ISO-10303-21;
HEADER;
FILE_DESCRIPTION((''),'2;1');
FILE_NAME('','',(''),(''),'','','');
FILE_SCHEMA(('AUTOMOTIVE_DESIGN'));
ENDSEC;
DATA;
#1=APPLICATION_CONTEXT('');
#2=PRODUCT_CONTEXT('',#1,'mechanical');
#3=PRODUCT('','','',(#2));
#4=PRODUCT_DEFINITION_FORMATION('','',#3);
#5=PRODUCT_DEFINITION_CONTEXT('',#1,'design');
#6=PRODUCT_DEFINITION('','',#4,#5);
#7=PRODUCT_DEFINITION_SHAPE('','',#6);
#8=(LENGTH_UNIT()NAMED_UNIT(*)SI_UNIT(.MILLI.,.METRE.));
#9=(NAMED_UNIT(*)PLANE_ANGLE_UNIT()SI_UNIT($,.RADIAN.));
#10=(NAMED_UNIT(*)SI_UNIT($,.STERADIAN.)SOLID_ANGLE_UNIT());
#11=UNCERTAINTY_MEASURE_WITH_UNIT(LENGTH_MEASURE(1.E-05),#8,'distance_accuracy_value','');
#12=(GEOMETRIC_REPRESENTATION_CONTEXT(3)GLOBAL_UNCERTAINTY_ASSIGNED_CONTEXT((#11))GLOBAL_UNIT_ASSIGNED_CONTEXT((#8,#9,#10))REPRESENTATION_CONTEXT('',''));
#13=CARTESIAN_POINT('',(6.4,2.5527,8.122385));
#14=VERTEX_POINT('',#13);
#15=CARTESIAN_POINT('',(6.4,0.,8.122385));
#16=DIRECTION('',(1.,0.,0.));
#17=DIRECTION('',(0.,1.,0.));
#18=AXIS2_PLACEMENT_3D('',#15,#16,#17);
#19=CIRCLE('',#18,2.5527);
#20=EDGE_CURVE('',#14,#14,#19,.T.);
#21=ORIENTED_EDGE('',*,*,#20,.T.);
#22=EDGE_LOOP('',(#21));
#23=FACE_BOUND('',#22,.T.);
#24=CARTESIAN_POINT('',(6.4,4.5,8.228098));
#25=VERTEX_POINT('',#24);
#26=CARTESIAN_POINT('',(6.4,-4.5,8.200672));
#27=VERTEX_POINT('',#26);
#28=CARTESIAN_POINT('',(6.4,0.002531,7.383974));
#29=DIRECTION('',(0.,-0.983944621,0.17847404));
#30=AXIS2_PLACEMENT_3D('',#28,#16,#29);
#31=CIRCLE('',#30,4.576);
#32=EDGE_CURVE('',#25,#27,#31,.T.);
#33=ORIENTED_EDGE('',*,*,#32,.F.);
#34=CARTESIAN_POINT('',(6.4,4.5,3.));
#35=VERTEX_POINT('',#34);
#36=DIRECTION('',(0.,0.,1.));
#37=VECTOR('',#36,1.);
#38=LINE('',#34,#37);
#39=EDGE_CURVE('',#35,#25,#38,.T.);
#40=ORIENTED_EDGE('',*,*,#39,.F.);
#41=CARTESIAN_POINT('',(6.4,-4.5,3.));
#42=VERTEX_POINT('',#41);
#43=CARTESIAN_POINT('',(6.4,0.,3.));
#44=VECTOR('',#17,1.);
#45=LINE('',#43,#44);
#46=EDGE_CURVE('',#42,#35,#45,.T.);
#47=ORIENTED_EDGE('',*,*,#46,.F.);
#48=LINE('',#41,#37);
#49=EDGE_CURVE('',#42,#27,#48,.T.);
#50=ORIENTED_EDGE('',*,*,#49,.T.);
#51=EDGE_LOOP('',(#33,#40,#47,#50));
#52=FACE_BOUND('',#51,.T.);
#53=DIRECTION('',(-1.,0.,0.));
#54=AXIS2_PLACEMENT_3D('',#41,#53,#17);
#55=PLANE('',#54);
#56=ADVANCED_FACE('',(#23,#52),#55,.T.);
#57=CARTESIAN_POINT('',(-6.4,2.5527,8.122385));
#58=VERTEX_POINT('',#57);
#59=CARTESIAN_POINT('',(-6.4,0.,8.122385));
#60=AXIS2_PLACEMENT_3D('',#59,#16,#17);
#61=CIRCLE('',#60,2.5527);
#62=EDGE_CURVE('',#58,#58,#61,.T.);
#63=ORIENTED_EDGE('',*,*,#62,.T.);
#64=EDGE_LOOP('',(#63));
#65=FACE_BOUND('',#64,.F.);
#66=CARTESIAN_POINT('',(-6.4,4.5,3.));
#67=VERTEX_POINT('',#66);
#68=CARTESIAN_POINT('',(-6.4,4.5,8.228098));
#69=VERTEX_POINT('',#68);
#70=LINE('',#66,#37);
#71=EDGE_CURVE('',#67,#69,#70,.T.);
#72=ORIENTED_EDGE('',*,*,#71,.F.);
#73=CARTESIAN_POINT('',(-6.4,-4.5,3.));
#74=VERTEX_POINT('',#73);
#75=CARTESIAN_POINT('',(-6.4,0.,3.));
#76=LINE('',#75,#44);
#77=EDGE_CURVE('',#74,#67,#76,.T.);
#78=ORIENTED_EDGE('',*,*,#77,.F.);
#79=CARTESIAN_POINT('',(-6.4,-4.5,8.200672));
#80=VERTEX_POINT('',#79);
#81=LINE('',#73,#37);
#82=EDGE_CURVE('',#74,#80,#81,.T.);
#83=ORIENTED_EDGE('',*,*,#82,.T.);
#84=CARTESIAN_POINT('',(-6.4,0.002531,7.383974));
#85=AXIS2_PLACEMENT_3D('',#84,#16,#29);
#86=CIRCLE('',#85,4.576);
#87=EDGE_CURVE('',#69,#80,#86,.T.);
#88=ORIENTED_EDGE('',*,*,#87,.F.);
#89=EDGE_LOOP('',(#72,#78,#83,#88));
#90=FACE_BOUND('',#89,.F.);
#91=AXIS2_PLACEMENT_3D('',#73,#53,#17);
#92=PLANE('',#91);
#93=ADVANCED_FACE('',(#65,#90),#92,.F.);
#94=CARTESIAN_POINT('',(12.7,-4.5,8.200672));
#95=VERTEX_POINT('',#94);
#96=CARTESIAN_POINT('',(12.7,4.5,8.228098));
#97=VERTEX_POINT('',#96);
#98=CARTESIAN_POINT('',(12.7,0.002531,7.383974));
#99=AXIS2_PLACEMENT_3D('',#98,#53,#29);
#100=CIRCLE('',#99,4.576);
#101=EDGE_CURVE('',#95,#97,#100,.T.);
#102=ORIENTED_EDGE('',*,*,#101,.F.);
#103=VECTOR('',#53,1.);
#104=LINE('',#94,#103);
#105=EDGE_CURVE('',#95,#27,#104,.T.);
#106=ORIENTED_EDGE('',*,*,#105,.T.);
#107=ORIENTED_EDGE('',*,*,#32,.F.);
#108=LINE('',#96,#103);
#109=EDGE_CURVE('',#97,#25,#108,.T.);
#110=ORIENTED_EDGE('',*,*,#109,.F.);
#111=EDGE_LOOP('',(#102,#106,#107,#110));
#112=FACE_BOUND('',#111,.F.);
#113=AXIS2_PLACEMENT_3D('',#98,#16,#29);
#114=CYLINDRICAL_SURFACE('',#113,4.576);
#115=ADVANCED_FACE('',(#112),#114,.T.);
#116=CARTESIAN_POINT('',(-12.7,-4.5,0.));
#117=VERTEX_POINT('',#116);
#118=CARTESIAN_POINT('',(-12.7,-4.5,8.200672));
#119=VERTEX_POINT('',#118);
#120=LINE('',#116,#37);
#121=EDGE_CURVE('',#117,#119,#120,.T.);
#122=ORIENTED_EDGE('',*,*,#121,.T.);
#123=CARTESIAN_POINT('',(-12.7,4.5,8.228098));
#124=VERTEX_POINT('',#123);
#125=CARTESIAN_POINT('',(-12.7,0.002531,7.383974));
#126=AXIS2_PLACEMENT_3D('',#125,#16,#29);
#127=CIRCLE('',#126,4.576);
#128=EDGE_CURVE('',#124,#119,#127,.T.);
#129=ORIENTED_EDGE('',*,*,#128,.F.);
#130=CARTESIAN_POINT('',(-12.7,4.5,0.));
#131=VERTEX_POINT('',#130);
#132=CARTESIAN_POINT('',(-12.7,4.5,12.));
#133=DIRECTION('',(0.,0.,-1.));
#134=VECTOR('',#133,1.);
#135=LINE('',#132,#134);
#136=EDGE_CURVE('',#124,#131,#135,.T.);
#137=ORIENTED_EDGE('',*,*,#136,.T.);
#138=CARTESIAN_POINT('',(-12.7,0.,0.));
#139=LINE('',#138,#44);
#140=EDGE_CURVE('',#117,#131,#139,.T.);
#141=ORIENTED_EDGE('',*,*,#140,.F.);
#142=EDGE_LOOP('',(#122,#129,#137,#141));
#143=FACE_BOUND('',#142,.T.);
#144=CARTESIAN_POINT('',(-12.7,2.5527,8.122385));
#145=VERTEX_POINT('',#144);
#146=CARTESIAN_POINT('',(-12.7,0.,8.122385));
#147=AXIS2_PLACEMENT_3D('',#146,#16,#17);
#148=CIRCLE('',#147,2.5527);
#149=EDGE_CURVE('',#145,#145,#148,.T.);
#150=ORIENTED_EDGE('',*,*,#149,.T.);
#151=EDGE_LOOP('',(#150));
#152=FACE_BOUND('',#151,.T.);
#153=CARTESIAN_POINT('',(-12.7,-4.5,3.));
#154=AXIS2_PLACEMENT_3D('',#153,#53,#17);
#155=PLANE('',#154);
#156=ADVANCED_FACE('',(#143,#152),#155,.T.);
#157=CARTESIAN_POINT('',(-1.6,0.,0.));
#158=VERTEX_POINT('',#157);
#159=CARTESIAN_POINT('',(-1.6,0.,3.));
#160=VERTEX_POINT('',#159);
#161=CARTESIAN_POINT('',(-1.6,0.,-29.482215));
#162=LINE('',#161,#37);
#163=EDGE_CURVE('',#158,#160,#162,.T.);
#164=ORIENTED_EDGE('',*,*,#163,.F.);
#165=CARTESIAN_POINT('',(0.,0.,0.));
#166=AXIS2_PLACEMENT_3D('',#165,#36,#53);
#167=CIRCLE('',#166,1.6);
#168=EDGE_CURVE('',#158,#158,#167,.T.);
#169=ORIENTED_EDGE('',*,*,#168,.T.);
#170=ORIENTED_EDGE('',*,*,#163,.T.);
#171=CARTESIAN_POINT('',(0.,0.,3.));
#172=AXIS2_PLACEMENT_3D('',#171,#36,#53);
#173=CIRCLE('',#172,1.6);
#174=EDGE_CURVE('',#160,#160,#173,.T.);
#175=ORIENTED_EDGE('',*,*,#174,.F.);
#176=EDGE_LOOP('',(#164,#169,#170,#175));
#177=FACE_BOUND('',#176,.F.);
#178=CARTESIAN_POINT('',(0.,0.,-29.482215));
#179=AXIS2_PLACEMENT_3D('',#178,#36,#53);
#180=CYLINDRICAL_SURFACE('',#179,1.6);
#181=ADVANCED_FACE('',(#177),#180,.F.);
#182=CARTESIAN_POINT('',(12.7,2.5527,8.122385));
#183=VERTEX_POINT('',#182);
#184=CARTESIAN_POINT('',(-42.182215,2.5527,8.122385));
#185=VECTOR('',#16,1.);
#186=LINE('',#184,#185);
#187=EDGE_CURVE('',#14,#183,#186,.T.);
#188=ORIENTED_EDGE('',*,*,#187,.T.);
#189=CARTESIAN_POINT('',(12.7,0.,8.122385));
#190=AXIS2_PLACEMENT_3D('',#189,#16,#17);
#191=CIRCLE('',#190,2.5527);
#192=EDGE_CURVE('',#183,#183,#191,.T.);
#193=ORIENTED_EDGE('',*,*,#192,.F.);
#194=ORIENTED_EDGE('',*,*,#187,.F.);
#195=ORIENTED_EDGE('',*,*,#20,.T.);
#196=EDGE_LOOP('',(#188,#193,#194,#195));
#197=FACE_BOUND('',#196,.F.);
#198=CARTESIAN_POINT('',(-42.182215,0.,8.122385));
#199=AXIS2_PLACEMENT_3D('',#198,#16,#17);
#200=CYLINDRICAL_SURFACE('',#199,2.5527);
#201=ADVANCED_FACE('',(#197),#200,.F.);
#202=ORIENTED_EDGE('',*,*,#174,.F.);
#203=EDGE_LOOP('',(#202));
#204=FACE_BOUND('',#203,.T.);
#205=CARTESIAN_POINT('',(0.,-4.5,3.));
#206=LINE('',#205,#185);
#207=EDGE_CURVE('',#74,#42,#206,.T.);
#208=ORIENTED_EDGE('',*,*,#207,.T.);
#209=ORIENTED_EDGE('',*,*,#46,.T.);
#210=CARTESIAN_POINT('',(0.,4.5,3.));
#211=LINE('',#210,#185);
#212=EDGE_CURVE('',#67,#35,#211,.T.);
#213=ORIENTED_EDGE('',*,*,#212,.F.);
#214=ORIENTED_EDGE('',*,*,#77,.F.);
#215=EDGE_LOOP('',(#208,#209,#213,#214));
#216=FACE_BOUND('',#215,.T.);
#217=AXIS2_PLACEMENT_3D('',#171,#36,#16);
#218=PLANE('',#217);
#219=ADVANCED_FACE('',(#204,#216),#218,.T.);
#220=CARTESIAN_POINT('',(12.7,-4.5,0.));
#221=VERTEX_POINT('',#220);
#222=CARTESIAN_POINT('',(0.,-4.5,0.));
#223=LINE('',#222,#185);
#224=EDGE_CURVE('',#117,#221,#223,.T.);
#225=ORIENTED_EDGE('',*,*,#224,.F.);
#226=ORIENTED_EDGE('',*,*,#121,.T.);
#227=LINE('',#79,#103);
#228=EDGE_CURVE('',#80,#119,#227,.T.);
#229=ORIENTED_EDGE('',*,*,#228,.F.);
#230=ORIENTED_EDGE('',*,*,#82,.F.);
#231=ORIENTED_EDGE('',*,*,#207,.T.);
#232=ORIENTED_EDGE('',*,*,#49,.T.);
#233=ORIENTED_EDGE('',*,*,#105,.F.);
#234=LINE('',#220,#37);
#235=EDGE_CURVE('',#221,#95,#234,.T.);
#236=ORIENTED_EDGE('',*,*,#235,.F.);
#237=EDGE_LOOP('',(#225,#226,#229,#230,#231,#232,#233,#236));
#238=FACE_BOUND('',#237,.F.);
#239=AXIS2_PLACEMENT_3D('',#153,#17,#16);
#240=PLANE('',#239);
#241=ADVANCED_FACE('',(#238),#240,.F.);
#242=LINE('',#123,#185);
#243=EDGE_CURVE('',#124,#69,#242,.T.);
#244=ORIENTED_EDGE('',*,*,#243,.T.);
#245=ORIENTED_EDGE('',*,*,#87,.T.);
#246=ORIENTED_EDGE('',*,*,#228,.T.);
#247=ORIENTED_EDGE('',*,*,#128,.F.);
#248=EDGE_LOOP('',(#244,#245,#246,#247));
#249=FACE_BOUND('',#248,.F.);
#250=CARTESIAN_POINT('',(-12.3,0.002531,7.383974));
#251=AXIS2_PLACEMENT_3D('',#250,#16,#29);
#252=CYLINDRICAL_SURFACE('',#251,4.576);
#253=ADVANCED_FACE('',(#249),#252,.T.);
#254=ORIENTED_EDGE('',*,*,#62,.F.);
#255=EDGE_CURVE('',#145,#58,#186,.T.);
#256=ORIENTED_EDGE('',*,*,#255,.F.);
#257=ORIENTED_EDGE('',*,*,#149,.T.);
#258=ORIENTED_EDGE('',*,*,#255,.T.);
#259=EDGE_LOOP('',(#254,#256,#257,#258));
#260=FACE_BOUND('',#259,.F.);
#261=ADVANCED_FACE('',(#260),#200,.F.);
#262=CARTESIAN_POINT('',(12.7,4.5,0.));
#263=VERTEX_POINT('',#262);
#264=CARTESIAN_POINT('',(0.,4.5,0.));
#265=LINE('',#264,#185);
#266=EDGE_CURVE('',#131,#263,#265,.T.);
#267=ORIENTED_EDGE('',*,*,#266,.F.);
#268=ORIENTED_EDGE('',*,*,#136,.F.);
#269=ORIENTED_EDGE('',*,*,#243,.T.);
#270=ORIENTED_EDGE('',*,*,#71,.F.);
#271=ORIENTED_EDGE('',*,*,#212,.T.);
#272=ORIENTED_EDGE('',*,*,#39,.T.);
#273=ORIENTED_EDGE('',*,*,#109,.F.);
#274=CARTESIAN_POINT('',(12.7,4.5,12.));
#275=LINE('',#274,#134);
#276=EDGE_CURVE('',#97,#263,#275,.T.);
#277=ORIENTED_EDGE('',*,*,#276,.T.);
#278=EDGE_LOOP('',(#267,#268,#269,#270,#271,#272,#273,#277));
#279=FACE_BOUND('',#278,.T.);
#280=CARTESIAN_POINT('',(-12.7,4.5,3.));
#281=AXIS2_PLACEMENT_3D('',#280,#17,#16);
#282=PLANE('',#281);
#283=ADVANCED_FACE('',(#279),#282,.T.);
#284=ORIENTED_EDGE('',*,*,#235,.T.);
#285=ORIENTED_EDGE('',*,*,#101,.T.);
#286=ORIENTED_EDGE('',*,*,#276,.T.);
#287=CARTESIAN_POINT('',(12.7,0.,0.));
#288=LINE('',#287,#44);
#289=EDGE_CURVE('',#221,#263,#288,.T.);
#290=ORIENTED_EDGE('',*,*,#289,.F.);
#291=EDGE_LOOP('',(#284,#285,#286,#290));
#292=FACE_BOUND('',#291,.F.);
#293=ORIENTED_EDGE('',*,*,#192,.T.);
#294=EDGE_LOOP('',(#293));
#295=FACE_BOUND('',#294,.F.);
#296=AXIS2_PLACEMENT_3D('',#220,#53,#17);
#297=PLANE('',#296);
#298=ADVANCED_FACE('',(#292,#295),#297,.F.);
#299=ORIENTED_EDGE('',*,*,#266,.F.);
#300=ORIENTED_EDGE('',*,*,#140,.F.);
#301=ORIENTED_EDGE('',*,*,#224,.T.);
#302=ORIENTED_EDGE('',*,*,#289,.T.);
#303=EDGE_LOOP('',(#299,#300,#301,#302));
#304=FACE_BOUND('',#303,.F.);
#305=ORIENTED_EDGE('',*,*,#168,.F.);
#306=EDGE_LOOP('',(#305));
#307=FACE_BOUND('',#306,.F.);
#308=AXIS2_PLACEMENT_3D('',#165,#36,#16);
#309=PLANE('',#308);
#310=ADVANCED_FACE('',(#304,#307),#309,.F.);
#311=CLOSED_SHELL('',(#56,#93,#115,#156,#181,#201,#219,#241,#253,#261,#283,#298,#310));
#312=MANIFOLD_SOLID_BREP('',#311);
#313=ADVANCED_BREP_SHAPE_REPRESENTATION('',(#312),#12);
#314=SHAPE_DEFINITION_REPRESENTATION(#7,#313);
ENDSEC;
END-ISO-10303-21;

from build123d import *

# Parameters (mm, degrees)
F0_W     = 25.4
F0_H     = 9
F1_DEPTH = 3
F2_W     = 6.3
F2_H     = 9
F3_DEPTH = 9
F5_DEPTH = 25
F6_DEPTH = 25
F8_D     = 5.1054
F9_D     = 3.2


with BuildPart() as f1:
    # F0 (on Top) → F1 (new body)
    with BuildSketch(Plane.XY):
        Rectangle(F0_W, F0_H)
    extrude(amount=F1_DEPTH)

    # F2 (on face) → F3 (join)
    with BuildSketch(Plane.XY.offset(3)):
        with Locations((-9.55, 0)):
            Rectangle(F2_W, F2_H)
        with Locations((9.55, 0)):
            Rectangle(F2_W, F2_H)
    extrude(amount=F3_DEPTH)

    # F4 (on face) → F5 (cut)
    with BuildSketch(Plane.YZ.offset(12.7)):
        with BuildLine():
            ThreePointArc((-4.5, 8.2006715238), (-0.0114142109, 11.9599530691), (4.5, 8.2280980423))
            Line((4.5, 8.2280980423), (4.5, 12))
            Line((4.5, 12), (-4.5, 12))
            Line((-4.5, 12), (-4.5, 8.2006715238))
        make_face()
    extrude(amount=-F5_DEPTH, mode=Mode.SUBTRACT)

    # F6 (cut): a face of the model
    f6_faces = [f1.faces().sort_by_distance(p)[0] for p in [
        (-12.3, -0.0114439809, 11.9697221024),
    ]]
    extrude(f6_faces, amount=-F6_DEPTH, mode=Mode.SUBTRACT)

    # F8 (through all)
    with Locations(Plane(origin=(-12.7, 0, 0), x_dir=(0, -1, 0), z_dir=(-1, 0, 0))):
        with Locations((0, 8.1223854795)):
            Hole(F8_D / 2)

    # F9 (through all)
    with Locations(Plane(origin=(0, 0, 0), x_dir=(1, 0, 0), z_dir=(0, 0, -1))):
        with Locations((0, 0)):
            Hole(F9_D / 2)


solid = f1.part
